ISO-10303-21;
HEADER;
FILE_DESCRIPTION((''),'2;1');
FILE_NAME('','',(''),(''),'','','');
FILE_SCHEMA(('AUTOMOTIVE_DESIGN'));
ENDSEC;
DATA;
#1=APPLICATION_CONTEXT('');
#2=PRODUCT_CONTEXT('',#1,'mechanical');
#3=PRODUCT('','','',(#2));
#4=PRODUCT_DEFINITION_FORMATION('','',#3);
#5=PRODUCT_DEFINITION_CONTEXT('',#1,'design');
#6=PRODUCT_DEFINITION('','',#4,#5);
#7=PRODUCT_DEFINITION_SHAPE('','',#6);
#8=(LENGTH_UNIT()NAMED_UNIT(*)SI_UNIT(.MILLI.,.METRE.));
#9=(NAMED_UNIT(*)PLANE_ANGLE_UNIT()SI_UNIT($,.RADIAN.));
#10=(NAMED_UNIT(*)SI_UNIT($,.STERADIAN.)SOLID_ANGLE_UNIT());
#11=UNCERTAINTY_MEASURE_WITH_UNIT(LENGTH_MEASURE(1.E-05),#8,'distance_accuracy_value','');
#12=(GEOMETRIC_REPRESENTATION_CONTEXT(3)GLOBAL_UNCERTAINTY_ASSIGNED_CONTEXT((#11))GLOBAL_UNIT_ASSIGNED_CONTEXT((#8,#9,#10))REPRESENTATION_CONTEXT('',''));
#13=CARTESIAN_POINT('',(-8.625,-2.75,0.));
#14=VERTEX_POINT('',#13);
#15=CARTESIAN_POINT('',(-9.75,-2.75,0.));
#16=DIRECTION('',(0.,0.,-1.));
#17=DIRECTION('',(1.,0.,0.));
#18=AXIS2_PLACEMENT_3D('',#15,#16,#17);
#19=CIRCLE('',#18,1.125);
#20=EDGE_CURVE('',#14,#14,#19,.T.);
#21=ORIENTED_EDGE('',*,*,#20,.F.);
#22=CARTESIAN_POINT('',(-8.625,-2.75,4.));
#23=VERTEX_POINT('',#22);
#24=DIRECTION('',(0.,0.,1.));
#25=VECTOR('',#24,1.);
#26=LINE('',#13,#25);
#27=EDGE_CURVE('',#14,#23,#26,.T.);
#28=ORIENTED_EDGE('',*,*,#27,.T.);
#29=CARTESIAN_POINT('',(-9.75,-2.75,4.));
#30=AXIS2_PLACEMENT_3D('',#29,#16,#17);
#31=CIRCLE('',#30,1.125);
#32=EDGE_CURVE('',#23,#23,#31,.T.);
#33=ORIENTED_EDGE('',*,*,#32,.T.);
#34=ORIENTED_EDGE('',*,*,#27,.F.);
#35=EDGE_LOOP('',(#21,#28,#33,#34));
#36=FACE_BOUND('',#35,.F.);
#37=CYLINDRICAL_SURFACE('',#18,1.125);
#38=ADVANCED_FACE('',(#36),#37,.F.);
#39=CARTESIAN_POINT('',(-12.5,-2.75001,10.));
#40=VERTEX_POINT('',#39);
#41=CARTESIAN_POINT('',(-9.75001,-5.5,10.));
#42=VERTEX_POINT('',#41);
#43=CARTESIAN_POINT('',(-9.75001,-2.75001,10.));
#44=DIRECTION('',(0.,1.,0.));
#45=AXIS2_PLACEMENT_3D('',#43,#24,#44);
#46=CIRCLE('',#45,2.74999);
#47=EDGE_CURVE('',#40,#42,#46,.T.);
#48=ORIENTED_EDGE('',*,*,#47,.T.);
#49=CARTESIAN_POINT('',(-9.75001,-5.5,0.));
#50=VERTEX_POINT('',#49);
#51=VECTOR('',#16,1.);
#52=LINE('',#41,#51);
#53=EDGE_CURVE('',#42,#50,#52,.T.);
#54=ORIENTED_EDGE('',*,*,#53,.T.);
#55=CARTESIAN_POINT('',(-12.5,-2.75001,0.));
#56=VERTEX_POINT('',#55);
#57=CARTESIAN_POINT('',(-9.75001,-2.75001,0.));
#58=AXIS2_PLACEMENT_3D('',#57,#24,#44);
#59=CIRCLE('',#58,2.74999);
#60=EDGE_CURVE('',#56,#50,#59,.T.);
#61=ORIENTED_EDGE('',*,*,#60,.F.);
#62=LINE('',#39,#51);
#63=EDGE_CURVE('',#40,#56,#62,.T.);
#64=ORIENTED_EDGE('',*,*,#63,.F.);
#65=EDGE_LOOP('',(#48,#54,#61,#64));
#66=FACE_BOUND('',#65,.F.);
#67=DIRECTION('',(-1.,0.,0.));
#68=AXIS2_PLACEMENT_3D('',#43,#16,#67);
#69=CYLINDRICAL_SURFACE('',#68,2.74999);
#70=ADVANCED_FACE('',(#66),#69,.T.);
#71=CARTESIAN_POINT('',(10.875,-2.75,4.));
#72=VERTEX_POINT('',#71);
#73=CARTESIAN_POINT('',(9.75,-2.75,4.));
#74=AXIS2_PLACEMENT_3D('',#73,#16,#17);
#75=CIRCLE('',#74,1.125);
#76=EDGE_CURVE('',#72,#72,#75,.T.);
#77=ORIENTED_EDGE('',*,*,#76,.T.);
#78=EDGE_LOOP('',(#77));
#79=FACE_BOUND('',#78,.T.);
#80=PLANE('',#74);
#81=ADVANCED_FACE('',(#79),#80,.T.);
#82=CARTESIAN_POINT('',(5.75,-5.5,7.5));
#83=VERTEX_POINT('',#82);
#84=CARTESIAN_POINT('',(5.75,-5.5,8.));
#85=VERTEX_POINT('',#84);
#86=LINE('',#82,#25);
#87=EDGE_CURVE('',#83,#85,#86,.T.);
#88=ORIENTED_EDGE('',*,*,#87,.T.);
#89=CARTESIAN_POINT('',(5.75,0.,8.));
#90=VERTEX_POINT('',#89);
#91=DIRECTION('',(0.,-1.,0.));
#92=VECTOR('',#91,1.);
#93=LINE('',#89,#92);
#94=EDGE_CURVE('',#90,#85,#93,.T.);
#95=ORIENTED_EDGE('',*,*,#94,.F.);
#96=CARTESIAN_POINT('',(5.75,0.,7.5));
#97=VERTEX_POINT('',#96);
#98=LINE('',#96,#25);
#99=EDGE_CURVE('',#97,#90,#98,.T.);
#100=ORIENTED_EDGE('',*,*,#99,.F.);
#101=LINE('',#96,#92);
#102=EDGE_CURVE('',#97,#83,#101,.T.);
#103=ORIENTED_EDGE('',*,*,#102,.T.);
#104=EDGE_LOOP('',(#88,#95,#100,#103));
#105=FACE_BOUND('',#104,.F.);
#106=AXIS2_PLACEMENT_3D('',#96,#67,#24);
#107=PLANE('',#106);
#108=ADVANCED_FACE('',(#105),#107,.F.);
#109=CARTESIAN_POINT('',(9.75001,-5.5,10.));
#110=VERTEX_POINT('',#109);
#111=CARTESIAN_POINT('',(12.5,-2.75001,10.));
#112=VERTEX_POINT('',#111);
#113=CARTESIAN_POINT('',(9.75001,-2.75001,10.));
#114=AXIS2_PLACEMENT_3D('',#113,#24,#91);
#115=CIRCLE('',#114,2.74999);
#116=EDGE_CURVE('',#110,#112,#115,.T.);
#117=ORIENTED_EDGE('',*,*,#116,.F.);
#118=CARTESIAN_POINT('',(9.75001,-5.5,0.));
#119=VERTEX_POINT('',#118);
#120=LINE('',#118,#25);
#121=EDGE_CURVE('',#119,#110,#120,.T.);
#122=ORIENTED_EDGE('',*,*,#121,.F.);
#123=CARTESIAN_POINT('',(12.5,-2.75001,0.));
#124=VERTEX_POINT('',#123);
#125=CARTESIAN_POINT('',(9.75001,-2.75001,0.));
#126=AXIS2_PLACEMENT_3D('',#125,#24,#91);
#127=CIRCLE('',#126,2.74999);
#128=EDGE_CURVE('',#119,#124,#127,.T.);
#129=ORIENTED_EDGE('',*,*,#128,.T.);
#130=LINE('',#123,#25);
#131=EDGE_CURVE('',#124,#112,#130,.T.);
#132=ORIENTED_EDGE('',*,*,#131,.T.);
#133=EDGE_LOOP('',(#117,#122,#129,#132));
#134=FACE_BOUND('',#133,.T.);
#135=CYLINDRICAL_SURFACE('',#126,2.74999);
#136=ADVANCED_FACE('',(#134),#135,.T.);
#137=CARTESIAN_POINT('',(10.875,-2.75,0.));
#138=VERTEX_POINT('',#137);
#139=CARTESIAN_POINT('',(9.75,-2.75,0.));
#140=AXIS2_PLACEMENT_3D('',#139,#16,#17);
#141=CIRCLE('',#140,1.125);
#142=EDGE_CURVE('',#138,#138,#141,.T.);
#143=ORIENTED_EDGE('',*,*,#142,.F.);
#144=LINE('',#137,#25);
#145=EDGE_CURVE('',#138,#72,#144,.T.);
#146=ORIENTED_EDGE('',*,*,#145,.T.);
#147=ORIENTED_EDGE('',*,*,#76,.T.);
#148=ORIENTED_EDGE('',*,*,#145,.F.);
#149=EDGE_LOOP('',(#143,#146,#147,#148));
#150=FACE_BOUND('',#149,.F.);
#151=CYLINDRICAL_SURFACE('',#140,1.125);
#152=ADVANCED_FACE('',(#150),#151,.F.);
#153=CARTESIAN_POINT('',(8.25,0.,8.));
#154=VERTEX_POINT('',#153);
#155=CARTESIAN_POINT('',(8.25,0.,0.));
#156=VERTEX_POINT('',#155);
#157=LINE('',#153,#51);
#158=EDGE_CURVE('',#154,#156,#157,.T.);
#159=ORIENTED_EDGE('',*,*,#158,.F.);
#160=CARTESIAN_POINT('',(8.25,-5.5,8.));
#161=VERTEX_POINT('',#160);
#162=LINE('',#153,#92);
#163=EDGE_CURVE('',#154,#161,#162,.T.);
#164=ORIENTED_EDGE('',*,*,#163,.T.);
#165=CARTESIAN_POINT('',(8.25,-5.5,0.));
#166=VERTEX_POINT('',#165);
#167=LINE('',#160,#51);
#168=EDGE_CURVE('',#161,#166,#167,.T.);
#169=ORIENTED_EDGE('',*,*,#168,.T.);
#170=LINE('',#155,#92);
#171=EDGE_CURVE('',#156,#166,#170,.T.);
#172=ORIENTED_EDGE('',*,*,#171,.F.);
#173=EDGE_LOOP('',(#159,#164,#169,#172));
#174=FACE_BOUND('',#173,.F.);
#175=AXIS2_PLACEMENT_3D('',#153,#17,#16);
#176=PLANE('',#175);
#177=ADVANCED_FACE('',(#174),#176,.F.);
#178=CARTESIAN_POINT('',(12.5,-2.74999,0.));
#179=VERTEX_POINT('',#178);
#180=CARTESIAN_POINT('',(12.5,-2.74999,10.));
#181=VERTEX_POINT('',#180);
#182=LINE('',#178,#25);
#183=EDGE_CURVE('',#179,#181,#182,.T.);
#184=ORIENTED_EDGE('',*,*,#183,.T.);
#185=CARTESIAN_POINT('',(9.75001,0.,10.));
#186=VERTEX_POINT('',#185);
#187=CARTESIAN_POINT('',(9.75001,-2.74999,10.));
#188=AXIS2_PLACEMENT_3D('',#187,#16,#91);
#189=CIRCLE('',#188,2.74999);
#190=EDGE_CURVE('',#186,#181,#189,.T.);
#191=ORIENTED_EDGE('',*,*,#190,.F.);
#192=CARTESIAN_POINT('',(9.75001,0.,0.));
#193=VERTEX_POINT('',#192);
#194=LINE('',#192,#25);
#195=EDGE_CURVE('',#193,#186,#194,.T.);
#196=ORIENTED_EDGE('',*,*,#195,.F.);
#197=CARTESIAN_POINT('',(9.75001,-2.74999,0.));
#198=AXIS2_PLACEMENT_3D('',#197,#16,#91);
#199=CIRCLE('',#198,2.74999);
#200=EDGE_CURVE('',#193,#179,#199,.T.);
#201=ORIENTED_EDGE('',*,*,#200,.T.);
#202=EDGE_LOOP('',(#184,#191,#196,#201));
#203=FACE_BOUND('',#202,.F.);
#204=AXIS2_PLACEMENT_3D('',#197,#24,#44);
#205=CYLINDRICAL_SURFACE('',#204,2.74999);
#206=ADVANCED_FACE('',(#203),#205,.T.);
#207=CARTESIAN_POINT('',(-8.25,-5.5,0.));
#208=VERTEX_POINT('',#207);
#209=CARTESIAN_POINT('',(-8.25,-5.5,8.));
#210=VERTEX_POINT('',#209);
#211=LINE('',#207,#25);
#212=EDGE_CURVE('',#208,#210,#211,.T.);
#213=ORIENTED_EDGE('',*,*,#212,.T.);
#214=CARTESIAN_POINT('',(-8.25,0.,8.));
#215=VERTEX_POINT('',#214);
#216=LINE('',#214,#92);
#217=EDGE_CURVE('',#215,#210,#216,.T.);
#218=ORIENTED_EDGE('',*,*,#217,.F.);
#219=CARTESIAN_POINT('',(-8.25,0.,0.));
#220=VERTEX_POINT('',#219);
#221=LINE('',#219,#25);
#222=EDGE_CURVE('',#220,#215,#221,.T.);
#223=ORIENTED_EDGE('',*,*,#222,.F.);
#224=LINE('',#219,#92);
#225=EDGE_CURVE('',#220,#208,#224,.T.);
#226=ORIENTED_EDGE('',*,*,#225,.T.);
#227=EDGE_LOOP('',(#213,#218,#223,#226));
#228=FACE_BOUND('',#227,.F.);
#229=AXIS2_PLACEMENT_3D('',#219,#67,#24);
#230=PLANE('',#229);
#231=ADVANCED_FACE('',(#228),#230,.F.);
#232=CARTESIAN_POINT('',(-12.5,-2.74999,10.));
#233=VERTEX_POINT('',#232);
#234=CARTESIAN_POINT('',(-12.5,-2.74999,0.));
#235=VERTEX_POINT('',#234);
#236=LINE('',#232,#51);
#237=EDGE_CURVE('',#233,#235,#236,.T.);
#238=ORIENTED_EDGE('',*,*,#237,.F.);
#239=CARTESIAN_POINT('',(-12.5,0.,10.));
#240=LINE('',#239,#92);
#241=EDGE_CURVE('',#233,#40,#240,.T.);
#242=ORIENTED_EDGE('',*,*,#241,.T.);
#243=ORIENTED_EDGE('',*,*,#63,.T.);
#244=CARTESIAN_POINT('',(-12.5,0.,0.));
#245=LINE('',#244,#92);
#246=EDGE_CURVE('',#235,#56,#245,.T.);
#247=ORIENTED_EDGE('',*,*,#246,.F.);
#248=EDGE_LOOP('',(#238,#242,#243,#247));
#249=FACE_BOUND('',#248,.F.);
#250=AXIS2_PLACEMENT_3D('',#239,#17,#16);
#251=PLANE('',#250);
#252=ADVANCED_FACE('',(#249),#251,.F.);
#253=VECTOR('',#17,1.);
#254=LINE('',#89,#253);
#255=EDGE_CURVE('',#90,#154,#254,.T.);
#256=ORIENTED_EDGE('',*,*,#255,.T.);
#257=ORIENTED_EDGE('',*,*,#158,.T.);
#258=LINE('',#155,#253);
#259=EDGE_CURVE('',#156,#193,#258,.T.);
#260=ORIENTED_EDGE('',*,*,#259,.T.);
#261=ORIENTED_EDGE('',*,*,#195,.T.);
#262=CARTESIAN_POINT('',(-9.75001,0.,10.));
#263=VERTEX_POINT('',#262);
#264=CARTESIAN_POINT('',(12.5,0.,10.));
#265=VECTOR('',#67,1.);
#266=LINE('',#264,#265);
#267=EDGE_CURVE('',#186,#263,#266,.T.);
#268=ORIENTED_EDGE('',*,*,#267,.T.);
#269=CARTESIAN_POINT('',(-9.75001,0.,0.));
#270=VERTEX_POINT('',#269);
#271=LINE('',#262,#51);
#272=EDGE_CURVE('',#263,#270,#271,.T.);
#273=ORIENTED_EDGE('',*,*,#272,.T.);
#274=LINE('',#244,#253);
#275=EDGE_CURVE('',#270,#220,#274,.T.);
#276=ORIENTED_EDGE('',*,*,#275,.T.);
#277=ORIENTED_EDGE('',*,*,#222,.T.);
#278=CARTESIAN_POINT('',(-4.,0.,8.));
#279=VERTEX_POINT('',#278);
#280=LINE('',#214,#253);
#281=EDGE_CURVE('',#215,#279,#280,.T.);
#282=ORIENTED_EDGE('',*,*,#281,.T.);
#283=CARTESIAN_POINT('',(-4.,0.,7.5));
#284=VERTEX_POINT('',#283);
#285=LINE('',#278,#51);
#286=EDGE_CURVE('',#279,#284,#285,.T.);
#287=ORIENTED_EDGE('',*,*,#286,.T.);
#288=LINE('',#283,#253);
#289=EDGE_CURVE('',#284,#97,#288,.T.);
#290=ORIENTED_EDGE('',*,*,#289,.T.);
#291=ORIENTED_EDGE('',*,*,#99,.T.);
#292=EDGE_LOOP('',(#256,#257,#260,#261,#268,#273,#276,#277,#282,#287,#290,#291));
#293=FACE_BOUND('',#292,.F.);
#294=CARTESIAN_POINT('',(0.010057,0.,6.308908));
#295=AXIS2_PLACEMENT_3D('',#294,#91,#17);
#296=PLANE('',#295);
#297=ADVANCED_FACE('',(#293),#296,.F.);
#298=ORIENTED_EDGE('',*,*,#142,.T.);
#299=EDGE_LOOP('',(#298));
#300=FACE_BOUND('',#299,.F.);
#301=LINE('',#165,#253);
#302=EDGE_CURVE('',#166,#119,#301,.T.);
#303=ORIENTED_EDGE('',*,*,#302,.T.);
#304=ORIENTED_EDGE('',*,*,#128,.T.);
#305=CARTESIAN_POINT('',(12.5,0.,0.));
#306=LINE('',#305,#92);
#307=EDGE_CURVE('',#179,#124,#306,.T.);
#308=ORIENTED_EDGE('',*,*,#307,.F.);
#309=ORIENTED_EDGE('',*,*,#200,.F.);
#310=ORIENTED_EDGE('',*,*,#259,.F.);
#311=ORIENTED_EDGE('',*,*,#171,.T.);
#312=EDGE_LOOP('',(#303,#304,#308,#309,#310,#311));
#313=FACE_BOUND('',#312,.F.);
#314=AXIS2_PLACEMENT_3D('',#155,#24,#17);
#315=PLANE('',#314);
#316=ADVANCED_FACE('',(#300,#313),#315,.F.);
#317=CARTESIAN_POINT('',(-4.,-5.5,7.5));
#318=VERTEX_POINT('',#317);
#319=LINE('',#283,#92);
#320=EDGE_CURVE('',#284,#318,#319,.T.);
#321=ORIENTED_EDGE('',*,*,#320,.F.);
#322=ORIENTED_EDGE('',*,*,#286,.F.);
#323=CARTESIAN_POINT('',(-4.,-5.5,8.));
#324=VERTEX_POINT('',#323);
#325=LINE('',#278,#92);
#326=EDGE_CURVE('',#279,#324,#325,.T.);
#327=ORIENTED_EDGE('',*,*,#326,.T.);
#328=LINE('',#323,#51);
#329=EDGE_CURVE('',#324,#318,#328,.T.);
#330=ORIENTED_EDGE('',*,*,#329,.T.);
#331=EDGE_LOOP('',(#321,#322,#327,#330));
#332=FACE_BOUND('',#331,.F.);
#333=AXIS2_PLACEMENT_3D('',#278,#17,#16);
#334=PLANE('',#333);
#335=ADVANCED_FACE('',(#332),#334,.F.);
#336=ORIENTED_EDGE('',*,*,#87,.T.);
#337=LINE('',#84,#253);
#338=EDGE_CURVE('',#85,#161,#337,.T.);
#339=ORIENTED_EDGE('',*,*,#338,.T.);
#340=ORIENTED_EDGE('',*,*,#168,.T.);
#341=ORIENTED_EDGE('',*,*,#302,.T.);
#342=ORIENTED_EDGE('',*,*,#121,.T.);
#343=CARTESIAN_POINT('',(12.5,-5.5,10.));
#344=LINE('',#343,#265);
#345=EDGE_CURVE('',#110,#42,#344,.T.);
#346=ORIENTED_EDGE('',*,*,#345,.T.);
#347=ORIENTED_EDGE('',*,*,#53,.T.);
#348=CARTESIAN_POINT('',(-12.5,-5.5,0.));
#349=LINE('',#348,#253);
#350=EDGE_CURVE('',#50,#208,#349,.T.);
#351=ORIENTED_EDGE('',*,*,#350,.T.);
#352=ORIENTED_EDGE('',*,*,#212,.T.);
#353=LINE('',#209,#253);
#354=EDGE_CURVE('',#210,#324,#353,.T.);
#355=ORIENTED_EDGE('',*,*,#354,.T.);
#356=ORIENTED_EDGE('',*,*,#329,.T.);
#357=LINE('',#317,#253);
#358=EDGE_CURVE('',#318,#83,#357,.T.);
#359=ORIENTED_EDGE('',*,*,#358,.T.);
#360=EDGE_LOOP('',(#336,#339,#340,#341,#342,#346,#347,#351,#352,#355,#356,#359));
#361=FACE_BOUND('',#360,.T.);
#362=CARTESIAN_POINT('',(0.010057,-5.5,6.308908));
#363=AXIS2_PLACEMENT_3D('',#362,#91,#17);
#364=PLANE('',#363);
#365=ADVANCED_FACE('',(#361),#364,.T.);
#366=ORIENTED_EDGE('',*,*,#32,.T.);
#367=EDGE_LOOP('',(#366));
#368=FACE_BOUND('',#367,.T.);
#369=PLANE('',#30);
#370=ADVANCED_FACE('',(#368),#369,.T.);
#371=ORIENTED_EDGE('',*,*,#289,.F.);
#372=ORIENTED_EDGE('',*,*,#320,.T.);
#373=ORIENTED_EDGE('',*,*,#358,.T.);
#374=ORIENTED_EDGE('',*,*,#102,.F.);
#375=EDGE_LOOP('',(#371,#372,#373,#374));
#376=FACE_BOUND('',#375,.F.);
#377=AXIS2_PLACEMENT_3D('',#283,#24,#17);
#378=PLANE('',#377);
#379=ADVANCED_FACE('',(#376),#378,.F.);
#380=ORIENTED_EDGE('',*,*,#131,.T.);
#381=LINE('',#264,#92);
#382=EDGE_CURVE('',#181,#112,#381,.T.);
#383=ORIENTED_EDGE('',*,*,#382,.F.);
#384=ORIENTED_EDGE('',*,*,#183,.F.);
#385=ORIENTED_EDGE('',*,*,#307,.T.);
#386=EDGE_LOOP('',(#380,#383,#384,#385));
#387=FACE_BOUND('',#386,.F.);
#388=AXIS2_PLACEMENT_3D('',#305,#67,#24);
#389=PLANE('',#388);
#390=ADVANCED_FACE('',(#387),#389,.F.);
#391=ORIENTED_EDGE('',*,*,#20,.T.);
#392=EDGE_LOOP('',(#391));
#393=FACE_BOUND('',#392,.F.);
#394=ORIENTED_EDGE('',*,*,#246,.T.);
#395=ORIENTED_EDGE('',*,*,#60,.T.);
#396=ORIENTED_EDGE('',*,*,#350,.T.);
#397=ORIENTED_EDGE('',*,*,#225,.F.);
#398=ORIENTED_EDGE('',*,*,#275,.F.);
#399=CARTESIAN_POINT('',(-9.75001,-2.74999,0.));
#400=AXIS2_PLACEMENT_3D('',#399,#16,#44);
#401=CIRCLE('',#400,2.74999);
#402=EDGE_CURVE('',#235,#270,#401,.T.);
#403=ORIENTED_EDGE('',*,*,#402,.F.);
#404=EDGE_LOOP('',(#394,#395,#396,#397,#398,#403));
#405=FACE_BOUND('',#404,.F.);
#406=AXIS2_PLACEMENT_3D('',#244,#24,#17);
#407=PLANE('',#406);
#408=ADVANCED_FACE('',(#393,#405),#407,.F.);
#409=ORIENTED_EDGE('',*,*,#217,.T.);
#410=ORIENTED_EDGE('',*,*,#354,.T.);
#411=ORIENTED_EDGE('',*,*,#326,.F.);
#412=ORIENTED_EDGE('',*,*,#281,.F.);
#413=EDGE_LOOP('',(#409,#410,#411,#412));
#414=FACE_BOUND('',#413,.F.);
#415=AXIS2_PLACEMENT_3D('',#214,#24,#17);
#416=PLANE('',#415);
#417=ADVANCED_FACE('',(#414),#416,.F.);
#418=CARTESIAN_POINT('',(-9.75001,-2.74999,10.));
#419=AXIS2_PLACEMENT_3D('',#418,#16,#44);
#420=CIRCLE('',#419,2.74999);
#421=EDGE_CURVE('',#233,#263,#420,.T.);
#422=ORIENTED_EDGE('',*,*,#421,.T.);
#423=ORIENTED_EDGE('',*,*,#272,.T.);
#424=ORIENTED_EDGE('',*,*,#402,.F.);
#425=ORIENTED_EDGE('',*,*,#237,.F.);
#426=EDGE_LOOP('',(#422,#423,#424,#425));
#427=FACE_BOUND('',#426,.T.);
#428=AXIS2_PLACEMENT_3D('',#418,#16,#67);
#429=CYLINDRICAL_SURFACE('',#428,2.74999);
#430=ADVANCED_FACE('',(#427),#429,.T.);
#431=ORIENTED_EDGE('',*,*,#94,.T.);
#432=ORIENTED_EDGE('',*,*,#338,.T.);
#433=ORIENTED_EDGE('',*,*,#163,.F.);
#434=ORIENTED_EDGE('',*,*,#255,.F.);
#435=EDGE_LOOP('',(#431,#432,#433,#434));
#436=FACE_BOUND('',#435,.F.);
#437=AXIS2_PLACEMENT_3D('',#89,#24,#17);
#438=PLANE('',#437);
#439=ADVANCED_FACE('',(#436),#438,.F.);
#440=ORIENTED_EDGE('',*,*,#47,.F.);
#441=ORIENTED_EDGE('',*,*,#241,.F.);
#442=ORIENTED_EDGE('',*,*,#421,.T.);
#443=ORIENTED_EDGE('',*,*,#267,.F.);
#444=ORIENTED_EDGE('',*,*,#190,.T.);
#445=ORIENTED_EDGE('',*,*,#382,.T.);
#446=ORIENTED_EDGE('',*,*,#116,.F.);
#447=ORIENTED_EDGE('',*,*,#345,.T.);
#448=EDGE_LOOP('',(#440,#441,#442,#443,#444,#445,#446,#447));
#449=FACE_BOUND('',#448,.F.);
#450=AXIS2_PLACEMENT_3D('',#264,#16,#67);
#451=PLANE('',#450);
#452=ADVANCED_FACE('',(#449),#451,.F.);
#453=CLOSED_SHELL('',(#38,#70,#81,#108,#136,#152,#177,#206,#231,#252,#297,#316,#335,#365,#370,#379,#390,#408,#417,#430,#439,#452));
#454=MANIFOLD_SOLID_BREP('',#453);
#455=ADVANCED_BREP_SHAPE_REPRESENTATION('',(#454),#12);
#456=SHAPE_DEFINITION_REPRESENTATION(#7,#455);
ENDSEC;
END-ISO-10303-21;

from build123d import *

# Parameters (mm, degrees)
F1_DEPTH = 5.5
F2_R     = 1.125
F3_DEPTH = 4
F4_R     = 2.74999


# Not quite as in the source:
# - a fillet or chamfer is up to 0.001 mm smaller than in the source, because OpenCascade refuses the exact size


with BuildPart() as f1:
    # F0 (on Front) → F1 (new body)
    with BuildSketch(Plane.XZ):
        Polygon((-12.5, 10), (-12.5, 0), (-8.25, 0), (-8.25, 8), (-4, 8), (-4, 7.5), (5.75, 7.5), (5.75, 8), (8.25, 8), (8.25, 0), (12.5, 0), (12.5, 10), align=None)
    extrude(amount=F1_DEPTH)

    # F2 (on face) → F3 (cut)
    with BuildSketch(Plane(origin=(0, 0, 0), x_dir=(1, 0, 0), z_dir=(0, 0, -1))):
        with Locations((-9.75, 2.75)):
            Circle(F2_R)
        with Locations((9.75, 2.75)):
            Circle(F2_R)
    extrude(amount=-F3_DEPTH, mode=Mode.SUBTRACT)

    # F4 (radius 2.75 in the source; OpenCascade refuses exactly that, so slightly less here)
    f4_edges = [f1.edges().sort_by_distance(p)[0] for p in [
        (-12.5, -5.5, 5),
        (-12.5, 0, 5),
        (12.5, -5.5, 5),
        (12.5, 0, 5),
    ]]
    fillet(f4_edges, radius=F4_R)


solid = f1.part
